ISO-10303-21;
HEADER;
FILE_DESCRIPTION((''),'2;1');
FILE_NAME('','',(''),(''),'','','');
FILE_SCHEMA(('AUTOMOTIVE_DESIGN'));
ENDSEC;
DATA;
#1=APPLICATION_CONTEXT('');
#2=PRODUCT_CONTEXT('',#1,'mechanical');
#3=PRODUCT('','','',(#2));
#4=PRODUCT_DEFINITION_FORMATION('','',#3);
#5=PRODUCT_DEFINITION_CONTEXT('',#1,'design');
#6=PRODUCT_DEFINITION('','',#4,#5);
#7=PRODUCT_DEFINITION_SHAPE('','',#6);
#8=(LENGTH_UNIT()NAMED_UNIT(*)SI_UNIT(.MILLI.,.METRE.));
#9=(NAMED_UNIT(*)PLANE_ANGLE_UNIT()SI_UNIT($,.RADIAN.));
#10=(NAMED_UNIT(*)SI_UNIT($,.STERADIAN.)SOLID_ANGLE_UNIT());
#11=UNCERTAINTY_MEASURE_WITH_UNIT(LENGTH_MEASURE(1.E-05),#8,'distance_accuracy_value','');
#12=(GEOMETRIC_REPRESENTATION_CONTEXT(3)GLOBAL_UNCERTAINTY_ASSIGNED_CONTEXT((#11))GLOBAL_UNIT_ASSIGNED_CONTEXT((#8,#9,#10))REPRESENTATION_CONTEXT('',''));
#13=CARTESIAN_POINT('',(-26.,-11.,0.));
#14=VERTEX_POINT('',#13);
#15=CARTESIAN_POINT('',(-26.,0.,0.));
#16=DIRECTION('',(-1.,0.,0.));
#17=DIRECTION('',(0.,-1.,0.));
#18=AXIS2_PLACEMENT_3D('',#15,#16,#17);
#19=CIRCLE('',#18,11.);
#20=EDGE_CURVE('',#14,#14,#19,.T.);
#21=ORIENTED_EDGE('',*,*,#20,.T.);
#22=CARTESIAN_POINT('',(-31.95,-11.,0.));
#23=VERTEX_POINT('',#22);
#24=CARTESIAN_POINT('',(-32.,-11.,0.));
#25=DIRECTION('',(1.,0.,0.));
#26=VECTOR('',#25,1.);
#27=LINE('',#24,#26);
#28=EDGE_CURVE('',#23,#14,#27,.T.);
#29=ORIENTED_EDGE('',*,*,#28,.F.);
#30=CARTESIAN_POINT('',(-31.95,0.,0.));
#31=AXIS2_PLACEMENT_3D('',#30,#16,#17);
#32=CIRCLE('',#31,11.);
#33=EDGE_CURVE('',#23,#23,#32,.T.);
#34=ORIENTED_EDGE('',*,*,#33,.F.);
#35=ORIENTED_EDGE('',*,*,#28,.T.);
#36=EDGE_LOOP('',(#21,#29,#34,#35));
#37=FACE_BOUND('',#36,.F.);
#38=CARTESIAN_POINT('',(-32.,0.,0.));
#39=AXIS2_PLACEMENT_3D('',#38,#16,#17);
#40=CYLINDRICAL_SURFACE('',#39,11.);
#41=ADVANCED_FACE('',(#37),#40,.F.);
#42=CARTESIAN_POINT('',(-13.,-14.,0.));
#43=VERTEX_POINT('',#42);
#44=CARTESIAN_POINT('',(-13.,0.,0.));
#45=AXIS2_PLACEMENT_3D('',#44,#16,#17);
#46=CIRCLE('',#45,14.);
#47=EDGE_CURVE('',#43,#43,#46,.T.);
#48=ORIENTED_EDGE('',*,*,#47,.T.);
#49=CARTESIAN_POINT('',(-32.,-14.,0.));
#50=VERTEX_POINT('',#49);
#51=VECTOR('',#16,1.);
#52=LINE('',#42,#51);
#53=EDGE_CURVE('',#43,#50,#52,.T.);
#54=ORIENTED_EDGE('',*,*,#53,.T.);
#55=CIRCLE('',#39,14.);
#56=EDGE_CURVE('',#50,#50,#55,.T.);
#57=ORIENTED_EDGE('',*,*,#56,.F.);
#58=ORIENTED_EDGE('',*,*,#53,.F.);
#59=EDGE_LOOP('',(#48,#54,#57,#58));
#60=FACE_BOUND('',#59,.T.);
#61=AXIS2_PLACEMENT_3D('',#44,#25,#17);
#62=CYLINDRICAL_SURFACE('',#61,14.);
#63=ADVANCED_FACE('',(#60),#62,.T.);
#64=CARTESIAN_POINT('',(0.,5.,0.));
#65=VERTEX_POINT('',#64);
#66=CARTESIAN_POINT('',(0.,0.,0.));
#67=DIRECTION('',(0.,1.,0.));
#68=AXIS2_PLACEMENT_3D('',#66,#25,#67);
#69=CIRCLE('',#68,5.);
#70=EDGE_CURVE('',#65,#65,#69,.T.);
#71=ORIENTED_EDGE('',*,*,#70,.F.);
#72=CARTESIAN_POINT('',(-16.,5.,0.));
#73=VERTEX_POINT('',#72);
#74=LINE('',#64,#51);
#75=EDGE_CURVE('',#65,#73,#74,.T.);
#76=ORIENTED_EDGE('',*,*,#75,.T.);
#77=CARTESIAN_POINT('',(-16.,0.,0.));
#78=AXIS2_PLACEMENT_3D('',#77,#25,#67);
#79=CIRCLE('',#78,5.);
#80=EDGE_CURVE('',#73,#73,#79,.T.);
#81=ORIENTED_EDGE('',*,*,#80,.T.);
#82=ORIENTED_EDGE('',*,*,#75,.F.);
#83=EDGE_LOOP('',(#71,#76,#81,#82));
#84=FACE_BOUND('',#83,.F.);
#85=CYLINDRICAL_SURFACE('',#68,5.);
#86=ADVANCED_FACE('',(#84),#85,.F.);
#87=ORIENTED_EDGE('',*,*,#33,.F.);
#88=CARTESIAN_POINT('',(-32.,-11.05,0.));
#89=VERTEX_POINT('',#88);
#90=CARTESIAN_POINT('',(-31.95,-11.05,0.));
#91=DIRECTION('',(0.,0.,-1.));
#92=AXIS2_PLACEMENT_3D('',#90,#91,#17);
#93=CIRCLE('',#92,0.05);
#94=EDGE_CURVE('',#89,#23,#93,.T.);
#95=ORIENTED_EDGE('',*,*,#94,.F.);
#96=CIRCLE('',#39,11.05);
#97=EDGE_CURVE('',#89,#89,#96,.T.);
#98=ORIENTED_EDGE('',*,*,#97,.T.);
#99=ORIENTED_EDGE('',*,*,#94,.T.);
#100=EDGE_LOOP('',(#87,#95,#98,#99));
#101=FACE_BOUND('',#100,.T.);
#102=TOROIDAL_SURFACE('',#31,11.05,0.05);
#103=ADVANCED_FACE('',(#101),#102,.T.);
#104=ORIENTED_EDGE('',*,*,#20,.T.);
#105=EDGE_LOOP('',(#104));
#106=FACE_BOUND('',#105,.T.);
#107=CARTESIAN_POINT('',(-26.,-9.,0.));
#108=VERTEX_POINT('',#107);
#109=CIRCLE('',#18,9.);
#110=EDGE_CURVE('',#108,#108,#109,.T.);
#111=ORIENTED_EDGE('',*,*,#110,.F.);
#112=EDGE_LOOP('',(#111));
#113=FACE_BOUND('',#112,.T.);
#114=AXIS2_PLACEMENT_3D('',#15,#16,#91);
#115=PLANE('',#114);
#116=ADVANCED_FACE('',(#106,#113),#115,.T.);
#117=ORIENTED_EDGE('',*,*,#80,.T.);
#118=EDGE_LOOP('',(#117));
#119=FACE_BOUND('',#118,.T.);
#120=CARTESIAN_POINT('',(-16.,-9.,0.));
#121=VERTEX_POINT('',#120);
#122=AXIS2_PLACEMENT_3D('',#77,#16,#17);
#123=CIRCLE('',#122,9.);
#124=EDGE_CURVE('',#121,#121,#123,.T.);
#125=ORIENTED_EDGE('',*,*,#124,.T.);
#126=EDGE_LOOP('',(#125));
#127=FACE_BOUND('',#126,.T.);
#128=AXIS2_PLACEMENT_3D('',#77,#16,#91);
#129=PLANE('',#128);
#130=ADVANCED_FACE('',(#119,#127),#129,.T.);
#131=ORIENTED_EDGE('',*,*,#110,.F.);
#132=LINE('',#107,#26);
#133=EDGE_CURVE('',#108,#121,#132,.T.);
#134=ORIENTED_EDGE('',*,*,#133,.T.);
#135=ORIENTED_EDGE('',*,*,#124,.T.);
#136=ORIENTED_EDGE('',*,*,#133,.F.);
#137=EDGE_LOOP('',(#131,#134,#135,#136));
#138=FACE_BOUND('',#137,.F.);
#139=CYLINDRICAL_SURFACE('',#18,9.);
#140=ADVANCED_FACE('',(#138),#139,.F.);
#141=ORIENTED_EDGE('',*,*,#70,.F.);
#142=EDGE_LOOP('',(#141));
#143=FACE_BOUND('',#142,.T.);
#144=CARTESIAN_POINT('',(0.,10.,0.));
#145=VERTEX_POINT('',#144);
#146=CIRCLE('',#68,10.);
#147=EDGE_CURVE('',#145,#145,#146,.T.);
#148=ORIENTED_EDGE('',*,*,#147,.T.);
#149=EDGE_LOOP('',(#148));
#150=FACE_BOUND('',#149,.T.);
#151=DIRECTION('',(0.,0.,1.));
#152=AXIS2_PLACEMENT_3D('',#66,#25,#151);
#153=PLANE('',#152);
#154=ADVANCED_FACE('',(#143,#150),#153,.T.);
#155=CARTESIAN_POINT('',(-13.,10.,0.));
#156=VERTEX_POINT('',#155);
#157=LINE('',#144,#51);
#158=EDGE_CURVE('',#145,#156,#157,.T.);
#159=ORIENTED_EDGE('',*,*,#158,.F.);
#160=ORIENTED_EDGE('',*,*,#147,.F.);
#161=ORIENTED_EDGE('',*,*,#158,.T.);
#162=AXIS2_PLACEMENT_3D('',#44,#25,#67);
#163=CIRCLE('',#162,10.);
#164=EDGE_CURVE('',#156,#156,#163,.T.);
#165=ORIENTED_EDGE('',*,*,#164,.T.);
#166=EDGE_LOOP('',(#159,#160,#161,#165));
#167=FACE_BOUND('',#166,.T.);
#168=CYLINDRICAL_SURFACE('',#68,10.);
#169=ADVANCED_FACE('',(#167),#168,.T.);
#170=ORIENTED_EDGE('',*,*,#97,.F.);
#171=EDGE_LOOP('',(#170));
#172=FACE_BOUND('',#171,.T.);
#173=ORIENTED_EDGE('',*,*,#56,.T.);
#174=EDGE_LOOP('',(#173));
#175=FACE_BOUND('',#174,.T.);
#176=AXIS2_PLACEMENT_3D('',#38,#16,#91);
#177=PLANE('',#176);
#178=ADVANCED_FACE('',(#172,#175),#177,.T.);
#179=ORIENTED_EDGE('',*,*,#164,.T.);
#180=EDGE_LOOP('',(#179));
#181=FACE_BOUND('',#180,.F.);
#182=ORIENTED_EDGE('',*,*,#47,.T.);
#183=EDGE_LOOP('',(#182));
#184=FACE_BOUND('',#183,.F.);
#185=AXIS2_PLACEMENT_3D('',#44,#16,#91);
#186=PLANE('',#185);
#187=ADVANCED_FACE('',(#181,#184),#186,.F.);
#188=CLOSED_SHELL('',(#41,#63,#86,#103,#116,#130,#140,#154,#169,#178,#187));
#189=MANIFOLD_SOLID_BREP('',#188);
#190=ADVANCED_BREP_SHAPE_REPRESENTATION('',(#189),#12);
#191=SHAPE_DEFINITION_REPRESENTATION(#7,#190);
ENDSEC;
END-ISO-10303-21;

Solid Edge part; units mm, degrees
sketch "Sketch1" plane through (0, 0, 0) normal (1, 0, 0) x (0, 1, 0)
  circle A0 centre (0, 0) radius 10
extrude "Protrusion1" add sketch "Sketch1" against normal blind 13
sketch "Sketch2" plane through (-13, 0, 0) normal (-1, 0, 0) x (0, -1, 0)
  circle A0 centre (0, 0) radius 14
extrude "ExtrudedProtrusion_2" add sketch "Sketch2" along normal blind 19
sketch "Sketch3" plane through (-32, 0, 0) normal (-1, 0, 0) x (0, -1, 0)
  circle A0 centre (0, 0) radius 11
extrude "ExtrudedCutout_1" cut sketch "Sketch3" against normal blind 6
sketch "Sketch4" plane through (-26, 0, 0) normal (-1, 0, 0) x (0, -1, 0)
  circle A0 centre (0, 0) radius 9
extrude "ExtrudedCutout_2" cut sketch "Sketch4" against normal blind 10
sketch "Sketch5" plane through (0, 0, 0) normal (1, 0, 0) x (0, 1, 0)
  circle A0 centre (0, 0) radius 5
extrude "ExtrudedCutout_3" cut sketch "Sketch5" against normal blind 60
fillet "Round_1" radius 0.05 1 edges at (-32, 11, 0)
properties material "PVC"
